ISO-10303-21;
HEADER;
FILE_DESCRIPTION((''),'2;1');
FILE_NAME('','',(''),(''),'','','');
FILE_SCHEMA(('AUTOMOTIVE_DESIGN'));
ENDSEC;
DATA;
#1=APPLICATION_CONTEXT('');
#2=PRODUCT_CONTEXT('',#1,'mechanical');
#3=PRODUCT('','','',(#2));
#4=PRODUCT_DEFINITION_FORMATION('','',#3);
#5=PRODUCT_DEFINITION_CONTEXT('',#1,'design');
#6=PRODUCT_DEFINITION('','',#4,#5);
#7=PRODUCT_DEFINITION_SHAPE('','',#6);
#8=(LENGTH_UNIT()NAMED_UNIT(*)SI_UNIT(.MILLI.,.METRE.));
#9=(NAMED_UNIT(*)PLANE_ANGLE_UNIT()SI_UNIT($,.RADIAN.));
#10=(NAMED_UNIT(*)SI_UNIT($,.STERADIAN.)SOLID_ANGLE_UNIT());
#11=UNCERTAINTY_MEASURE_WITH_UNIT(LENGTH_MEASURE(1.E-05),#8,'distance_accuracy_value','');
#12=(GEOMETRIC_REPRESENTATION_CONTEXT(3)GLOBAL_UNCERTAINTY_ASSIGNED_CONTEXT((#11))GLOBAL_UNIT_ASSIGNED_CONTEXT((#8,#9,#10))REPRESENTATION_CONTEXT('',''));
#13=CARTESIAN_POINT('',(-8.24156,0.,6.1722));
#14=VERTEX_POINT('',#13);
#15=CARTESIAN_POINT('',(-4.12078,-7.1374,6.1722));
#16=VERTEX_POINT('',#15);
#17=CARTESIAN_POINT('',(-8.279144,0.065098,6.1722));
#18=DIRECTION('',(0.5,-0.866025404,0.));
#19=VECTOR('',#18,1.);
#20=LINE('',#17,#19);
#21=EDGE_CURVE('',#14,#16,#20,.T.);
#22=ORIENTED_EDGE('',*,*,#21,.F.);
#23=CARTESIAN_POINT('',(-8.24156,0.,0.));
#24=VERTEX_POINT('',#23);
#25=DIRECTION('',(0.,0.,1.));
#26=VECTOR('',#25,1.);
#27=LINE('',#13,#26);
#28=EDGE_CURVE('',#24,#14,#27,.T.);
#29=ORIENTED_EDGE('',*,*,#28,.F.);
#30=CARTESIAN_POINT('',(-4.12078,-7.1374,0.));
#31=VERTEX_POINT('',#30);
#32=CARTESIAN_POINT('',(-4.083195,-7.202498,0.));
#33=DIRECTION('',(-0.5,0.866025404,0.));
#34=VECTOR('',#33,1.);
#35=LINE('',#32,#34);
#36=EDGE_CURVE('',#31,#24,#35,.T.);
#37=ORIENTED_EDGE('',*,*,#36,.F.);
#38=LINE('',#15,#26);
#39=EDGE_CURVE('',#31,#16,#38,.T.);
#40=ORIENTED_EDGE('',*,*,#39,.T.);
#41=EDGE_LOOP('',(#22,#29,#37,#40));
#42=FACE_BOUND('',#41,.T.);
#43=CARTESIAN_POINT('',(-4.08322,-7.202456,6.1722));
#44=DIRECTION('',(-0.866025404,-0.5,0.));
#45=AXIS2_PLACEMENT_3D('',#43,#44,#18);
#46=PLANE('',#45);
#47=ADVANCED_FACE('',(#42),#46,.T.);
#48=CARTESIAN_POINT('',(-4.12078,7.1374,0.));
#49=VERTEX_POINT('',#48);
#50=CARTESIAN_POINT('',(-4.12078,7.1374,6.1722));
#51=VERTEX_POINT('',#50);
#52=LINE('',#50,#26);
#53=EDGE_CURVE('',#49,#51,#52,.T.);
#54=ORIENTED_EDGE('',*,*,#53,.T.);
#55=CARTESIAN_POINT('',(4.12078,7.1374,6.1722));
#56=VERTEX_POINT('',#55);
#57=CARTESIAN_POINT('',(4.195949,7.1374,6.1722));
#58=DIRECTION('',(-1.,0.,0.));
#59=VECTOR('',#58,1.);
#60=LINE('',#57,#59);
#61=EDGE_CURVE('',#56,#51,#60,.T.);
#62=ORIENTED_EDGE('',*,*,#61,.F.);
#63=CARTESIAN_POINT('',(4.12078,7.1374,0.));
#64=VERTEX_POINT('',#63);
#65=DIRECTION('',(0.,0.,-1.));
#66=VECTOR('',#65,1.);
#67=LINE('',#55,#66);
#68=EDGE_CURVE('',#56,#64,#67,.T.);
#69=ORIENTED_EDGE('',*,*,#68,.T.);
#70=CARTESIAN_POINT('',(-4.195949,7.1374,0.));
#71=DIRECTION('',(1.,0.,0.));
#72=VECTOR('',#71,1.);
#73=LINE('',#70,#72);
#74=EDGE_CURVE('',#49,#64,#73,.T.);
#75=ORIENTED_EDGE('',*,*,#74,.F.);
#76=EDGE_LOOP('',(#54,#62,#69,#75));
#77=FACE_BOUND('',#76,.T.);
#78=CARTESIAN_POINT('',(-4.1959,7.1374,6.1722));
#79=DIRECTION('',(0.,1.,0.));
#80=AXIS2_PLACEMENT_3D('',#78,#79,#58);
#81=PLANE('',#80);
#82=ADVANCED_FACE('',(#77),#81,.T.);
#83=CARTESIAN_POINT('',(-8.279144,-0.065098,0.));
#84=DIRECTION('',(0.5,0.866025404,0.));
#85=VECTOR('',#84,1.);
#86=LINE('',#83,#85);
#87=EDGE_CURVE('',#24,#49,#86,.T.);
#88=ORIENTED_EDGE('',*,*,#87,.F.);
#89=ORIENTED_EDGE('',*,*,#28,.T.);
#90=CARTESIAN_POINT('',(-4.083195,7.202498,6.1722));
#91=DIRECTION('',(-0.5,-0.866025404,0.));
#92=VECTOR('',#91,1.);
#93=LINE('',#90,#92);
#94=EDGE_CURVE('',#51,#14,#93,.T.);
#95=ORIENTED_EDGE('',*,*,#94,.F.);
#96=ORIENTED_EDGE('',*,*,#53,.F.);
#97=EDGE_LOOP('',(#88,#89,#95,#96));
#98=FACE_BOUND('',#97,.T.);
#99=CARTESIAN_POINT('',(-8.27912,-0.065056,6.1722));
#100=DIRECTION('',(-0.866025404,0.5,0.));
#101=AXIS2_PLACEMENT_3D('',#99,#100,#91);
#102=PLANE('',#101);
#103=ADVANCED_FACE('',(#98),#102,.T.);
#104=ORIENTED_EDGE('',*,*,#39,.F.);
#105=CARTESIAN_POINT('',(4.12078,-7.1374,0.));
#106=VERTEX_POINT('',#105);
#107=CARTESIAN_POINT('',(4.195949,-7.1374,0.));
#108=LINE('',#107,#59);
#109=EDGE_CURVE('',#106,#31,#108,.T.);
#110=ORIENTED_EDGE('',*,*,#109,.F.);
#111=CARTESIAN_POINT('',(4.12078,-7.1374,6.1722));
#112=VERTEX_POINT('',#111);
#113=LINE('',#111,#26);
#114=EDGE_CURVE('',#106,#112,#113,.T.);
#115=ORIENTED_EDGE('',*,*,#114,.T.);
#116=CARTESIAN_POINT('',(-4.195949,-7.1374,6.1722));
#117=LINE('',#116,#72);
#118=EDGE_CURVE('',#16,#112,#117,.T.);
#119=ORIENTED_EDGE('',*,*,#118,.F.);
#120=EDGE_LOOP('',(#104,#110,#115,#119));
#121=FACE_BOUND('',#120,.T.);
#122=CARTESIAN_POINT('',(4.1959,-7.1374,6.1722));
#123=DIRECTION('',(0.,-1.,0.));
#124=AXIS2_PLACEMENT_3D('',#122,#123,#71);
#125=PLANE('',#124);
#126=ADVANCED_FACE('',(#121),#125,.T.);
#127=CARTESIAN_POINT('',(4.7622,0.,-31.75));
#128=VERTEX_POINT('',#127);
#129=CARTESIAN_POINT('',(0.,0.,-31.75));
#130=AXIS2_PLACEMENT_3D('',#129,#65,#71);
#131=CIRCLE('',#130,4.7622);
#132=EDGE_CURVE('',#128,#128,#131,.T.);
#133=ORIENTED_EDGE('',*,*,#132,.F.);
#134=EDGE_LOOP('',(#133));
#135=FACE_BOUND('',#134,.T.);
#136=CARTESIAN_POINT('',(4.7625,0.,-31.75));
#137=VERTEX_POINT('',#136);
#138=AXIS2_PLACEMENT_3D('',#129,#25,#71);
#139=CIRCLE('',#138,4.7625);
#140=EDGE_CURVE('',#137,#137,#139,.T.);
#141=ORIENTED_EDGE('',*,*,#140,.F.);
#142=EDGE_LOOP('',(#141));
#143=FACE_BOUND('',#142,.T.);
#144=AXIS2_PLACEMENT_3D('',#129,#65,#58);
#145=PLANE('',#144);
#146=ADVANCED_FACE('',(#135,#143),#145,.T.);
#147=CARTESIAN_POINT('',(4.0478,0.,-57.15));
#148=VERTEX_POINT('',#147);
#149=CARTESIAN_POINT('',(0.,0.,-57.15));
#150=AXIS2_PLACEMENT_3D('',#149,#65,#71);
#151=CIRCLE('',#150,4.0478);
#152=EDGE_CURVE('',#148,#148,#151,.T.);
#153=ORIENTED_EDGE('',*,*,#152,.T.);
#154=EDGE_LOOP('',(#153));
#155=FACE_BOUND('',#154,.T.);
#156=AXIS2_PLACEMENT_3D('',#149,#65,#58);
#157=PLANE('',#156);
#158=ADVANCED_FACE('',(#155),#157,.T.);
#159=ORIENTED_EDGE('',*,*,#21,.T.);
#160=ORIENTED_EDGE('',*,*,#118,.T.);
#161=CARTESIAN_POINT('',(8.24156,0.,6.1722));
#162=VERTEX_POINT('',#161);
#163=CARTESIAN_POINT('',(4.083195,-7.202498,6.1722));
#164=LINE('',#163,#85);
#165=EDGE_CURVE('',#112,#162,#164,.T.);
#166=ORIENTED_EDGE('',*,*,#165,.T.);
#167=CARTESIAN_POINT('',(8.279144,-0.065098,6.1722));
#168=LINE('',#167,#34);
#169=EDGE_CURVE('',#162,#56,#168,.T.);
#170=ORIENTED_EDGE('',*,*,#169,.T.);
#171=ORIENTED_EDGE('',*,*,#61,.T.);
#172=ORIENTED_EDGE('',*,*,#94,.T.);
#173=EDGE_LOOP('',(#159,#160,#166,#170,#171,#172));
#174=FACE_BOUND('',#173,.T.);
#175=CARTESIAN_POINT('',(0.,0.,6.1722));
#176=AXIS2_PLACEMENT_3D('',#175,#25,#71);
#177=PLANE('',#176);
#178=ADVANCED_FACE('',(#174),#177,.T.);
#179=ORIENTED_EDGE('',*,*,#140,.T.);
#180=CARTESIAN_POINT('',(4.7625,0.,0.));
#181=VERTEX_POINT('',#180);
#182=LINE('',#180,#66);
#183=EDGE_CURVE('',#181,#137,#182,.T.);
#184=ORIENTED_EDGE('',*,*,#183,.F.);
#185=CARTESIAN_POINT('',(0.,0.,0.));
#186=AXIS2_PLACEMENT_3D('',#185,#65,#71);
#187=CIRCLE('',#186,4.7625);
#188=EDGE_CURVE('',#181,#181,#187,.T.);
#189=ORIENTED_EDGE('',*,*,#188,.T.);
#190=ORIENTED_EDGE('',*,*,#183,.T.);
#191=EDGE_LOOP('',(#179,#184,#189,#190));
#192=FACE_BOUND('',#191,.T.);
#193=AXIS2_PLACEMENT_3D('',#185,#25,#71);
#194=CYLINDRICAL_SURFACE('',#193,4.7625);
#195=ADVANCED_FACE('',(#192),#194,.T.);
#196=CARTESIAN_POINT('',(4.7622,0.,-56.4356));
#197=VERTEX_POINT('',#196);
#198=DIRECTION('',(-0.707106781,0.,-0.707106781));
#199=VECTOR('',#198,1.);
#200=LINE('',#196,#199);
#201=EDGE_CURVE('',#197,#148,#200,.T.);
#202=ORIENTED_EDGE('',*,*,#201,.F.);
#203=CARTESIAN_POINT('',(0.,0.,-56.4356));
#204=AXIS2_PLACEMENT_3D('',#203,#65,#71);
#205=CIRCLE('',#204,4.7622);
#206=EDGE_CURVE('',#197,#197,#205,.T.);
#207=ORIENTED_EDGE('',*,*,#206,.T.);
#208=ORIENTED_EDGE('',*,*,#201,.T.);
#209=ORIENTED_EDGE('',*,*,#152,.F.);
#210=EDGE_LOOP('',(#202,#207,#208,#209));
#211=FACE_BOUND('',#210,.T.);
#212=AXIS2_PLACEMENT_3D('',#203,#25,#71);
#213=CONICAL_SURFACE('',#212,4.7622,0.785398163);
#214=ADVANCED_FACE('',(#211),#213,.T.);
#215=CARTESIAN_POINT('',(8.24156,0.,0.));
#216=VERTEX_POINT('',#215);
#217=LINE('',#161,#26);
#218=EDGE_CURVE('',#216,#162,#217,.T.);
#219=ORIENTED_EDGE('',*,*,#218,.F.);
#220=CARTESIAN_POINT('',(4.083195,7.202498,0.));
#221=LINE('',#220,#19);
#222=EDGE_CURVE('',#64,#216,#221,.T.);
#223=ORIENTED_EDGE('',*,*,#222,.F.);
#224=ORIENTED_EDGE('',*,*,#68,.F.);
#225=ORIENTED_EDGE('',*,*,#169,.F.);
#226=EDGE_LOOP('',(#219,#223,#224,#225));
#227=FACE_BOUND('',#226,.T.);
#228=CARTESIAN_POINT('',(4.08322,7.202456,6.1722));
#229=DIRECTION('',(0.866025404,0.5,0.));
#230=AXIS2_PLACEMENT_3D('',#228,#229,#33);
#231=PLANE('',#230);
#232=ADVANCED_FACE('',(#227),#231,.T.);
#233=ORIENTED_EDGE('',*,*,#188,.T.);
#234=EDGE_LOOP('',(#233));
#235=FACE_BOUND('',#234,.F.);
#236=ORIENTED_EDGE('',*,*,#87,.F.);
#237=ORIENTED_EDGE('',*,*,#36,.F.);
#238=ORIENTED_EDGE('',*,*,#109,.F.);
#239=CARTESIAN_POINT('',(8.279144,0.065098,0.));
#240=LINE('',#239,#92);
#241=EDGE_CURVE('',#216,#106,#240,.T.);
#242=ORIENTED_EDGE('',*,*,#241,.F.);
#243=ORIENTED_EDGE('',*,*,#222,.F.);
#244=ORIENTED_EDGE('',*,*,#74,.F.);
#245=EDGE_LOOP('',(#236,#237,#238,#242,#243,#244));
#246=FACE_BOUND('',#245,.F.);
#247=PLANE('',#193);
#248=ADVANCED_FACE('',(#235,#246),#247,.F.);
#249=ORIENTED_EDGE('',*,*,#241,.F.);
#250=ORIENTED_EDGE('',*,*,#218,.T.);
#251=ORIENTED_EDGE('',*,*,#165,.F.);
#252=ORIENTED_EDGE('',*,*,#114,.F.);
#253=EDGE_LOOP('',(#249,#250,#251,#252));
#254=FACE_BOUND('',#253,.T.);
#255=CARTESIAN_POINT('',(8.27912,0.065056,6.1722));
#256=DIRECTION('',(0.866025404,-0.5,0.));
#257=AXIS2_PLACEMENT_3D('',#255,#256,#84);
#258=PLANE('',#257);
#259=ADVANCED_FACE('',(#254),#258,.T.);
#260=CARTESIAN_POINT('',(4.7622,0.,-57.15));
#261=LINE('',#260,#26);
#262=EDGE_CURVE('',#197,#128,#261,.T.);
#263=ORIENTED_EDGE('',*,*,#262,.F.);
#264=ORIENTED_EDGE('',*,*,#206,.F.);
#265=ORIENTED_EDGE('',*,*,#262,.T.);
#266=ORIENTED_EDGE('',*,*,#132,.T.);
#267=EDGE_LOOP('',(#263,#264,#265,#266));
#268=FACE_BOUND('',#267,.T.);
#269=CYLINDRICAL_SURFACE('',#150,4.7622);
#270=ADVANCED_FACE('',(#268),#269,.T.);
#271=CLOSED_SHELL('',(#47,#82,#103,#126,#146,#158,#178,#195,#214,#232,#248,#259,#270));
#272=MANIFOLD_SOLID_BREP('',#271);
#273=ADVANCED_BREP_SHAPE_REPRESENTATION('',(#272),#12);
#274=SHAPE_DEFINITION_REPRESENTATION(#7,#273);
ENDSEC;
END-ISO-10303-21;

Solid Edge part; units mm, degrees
sketch "Sketch1" plane through (0, 0, 0) normal (0, 0, 1) x (1, 0, 0)
  circle A0 centre (0, 0) radius 8.2794
  dimension "D1" = 16.5588
extrude "Protrusion1" add sketch "Sketch1" along normal blind 6.1722
sketch "Sketch2" plane through (0, 0, 0) normal (0, 0, -1) x (1, 0, 0)
  circle A0 centre (0, 0) radius 4.7625
extrude "Protrusion2" add sketch "Sketch2" along normal blind 57.15
sketch "Sketch3" plane through (0, 0, -57.15) normal (0, 0, -1) x (1, 0, 0)
  circle A0 centre (0, 0) radius 4.7622
extrude "Cutout1" cut sketch "Sketch3" against normal blind 25.4 flip side to cut
chamfer "Chamfer_1" distance 0.7144 angle 45 1 edges at (-4.7622, 0, -57.15)
sketch "Sketch4" plane through (0, 0, 6.1722) normal (0, 0, 1) x (1, 0, 0)
  line L0 (-4.1959, 7.1374) -> (4.1959, 7.1374)
  dimension "D1" = 14.2748
extrude "Cutout2" cut sketch "Sketch4" against normal up to next material side at (0, 7.1874, 6.1722)
pattern_circular "Pattern1" count 6 over 360 about axis through (0, 0, 6.1722) along (0, 0, 1) of "Cutout2"
properties part number "24100083"
